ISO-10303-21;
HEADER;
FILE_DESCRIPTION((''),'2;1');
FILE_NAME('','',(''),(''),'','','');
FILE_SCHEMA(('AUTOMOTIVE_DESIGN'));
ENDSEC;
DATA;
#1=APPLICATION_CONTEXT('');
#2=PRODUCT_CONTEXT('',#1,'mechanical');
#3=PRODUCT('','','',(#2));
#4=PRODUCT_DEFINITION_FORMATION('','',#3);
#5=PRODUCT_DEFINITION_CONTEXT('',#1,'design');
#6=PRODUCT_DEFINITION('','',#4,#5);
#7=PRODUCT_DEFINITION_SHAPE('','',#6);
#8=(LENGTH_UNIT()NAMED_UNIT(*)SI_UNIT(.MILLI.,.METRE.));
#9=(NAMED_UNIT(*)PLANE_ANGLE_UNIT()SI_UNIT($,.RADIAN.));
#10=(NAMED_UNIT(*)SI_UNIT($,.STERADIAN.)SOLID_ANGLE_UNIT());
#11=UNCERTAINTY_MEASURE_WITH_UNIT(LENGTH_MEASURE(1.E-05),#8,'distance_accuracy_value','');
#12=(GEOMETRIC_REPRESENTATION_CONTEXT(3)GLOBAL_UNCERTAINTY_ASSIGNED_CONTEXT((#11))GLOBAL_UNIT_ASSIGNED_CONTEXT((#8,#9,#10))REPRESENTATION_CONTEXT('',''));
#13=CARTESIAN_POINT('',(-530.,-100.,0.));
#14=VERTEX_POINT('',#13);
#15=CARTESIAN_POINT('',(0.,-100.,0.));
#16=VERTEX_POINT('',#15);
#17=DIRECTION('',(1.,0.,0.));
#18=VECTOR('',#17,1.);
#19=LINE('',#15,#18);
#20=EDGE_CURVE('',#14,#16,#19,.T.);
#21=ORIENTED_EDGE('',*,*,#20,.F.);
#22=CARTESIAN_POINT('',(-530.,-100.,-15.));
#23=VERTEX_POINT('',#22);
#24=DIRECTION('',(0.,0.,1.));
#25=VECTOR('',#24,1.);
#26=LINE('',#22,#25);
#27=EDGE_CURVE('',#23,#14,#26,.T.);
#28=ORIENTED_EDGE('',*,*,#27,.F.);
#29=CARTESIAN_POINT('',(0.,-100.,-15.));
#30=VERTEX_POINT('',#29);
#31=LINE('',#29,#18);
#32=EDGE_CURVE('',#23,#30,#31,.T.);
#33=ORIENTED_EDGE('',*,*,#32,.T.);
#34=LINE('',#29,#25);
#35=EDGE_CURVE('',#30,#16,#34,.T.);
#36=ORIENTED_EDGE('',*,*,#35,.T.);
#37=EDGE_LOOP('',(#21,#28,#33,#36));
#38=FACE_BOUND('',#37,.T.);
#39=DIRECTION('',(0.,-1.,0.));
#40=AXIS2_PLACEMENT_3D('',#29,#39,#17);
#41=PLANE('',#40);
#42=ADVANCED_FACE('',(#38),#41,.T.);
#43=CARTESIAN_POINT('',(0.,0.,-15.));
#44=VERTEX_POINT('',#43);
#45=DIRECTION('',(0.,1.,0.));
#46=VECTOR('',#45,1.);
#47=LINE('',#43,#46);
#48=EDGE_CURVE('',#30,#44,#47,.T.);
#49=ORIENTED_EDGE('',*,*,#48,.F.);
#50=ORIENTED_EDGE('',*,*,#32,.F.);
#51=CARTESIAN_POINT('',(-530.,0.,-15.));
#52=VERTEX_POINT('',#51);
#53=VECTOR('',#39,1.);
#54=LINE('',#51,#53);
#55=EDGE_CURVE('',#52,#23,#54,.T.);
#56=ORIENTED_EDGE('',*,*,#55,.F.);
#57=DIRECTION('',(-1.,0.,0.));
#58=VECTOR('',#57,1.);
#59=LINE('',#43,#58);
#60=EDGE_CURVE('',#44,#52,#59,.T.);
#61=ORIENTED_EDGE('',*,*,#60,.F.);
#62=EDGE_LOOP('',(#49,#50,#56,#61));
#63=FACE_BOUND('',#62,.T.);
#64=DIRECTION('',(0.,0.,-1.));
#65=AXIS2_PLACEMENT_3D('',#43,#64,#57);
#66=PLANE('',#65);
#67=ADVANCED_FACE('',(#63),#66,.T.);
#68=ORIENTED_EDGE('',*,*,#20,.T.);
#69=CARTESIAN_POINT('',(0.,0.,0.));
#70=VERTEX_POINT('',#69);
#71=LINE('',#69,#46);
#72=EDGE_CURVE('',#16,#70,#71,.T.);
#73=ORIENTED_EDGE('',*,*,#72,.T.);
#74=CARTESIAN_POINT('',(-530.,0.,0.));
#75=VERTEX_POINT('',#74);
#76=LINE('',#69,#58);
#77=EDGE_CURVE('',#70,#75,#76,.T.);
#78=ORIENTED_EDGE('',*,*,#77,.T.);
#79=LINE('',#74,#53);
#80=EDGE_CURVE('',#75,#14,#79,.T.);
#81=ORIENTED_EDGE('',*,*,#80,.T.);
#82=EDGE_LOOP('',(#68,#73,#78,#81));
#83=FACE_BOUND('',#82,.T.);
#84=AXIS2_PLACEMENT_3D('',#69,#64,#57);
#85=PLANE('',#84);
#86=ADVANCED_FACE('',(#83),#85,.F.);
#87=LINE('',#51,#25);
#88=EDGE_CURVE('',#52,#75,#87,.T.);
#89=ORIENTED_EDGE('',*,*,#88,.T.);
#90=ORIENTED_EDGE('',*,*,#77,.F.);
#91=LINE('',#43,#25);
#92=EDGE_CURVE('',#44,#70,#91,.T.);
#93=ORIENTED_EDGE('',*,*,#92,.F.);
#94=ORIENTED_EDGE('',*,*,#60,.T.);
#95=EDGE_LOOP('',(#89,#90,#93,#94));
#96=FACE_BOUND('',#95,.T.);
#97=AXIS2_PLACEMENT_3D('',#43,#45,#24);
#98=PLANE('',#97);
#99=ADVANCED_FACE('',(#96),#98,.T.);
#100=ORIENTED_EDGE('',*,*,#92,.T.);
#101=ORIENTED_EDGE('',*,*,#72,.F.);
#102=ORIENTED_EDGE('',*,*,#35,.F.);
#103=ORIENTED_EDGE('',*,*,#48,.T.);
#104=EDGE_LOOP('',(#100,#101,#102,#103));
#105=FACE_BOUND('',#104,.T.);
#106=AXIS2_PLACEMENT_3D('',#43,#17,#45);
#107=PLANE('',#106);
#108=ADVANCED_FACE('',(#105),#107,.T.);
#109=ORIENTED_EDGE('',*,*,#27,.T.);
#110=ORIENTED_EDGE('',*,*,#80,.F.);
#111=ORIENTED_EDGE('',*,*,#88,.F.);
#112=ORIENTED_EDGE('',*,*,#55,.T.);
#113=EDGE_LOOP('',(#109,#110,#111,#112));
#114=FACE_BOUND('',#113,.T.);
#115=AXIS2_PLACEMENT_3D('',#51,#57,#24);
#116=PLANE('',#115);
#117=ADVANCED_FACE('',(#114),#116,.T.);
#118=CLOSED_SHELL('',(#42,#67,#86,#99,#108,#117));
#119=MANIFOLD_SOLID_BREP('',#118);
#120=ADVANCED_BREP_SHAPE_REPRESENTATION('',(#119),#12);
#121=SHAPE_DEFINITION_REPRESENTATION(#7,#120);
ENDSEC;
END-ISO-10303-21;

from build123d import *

# Parameters (mm, degrees)
IZIM1_W            = 530
IZIM1_H            = 100
TABAN_FLAN_1_DEPTH = 15


# Sheet-metal steps are written as plain solids
with BuildPart() as part:
    # Çizim1 → Taban-Flanş1 (new body)
    with BuildSketch(Plane.XY):
        with Locations((-265, -50)):
            Rectangle(IZIM1_W, IZIM1_H)
    extrude(amount=-TABAN_FLAN_1_DEPTH)


solid = part.part
